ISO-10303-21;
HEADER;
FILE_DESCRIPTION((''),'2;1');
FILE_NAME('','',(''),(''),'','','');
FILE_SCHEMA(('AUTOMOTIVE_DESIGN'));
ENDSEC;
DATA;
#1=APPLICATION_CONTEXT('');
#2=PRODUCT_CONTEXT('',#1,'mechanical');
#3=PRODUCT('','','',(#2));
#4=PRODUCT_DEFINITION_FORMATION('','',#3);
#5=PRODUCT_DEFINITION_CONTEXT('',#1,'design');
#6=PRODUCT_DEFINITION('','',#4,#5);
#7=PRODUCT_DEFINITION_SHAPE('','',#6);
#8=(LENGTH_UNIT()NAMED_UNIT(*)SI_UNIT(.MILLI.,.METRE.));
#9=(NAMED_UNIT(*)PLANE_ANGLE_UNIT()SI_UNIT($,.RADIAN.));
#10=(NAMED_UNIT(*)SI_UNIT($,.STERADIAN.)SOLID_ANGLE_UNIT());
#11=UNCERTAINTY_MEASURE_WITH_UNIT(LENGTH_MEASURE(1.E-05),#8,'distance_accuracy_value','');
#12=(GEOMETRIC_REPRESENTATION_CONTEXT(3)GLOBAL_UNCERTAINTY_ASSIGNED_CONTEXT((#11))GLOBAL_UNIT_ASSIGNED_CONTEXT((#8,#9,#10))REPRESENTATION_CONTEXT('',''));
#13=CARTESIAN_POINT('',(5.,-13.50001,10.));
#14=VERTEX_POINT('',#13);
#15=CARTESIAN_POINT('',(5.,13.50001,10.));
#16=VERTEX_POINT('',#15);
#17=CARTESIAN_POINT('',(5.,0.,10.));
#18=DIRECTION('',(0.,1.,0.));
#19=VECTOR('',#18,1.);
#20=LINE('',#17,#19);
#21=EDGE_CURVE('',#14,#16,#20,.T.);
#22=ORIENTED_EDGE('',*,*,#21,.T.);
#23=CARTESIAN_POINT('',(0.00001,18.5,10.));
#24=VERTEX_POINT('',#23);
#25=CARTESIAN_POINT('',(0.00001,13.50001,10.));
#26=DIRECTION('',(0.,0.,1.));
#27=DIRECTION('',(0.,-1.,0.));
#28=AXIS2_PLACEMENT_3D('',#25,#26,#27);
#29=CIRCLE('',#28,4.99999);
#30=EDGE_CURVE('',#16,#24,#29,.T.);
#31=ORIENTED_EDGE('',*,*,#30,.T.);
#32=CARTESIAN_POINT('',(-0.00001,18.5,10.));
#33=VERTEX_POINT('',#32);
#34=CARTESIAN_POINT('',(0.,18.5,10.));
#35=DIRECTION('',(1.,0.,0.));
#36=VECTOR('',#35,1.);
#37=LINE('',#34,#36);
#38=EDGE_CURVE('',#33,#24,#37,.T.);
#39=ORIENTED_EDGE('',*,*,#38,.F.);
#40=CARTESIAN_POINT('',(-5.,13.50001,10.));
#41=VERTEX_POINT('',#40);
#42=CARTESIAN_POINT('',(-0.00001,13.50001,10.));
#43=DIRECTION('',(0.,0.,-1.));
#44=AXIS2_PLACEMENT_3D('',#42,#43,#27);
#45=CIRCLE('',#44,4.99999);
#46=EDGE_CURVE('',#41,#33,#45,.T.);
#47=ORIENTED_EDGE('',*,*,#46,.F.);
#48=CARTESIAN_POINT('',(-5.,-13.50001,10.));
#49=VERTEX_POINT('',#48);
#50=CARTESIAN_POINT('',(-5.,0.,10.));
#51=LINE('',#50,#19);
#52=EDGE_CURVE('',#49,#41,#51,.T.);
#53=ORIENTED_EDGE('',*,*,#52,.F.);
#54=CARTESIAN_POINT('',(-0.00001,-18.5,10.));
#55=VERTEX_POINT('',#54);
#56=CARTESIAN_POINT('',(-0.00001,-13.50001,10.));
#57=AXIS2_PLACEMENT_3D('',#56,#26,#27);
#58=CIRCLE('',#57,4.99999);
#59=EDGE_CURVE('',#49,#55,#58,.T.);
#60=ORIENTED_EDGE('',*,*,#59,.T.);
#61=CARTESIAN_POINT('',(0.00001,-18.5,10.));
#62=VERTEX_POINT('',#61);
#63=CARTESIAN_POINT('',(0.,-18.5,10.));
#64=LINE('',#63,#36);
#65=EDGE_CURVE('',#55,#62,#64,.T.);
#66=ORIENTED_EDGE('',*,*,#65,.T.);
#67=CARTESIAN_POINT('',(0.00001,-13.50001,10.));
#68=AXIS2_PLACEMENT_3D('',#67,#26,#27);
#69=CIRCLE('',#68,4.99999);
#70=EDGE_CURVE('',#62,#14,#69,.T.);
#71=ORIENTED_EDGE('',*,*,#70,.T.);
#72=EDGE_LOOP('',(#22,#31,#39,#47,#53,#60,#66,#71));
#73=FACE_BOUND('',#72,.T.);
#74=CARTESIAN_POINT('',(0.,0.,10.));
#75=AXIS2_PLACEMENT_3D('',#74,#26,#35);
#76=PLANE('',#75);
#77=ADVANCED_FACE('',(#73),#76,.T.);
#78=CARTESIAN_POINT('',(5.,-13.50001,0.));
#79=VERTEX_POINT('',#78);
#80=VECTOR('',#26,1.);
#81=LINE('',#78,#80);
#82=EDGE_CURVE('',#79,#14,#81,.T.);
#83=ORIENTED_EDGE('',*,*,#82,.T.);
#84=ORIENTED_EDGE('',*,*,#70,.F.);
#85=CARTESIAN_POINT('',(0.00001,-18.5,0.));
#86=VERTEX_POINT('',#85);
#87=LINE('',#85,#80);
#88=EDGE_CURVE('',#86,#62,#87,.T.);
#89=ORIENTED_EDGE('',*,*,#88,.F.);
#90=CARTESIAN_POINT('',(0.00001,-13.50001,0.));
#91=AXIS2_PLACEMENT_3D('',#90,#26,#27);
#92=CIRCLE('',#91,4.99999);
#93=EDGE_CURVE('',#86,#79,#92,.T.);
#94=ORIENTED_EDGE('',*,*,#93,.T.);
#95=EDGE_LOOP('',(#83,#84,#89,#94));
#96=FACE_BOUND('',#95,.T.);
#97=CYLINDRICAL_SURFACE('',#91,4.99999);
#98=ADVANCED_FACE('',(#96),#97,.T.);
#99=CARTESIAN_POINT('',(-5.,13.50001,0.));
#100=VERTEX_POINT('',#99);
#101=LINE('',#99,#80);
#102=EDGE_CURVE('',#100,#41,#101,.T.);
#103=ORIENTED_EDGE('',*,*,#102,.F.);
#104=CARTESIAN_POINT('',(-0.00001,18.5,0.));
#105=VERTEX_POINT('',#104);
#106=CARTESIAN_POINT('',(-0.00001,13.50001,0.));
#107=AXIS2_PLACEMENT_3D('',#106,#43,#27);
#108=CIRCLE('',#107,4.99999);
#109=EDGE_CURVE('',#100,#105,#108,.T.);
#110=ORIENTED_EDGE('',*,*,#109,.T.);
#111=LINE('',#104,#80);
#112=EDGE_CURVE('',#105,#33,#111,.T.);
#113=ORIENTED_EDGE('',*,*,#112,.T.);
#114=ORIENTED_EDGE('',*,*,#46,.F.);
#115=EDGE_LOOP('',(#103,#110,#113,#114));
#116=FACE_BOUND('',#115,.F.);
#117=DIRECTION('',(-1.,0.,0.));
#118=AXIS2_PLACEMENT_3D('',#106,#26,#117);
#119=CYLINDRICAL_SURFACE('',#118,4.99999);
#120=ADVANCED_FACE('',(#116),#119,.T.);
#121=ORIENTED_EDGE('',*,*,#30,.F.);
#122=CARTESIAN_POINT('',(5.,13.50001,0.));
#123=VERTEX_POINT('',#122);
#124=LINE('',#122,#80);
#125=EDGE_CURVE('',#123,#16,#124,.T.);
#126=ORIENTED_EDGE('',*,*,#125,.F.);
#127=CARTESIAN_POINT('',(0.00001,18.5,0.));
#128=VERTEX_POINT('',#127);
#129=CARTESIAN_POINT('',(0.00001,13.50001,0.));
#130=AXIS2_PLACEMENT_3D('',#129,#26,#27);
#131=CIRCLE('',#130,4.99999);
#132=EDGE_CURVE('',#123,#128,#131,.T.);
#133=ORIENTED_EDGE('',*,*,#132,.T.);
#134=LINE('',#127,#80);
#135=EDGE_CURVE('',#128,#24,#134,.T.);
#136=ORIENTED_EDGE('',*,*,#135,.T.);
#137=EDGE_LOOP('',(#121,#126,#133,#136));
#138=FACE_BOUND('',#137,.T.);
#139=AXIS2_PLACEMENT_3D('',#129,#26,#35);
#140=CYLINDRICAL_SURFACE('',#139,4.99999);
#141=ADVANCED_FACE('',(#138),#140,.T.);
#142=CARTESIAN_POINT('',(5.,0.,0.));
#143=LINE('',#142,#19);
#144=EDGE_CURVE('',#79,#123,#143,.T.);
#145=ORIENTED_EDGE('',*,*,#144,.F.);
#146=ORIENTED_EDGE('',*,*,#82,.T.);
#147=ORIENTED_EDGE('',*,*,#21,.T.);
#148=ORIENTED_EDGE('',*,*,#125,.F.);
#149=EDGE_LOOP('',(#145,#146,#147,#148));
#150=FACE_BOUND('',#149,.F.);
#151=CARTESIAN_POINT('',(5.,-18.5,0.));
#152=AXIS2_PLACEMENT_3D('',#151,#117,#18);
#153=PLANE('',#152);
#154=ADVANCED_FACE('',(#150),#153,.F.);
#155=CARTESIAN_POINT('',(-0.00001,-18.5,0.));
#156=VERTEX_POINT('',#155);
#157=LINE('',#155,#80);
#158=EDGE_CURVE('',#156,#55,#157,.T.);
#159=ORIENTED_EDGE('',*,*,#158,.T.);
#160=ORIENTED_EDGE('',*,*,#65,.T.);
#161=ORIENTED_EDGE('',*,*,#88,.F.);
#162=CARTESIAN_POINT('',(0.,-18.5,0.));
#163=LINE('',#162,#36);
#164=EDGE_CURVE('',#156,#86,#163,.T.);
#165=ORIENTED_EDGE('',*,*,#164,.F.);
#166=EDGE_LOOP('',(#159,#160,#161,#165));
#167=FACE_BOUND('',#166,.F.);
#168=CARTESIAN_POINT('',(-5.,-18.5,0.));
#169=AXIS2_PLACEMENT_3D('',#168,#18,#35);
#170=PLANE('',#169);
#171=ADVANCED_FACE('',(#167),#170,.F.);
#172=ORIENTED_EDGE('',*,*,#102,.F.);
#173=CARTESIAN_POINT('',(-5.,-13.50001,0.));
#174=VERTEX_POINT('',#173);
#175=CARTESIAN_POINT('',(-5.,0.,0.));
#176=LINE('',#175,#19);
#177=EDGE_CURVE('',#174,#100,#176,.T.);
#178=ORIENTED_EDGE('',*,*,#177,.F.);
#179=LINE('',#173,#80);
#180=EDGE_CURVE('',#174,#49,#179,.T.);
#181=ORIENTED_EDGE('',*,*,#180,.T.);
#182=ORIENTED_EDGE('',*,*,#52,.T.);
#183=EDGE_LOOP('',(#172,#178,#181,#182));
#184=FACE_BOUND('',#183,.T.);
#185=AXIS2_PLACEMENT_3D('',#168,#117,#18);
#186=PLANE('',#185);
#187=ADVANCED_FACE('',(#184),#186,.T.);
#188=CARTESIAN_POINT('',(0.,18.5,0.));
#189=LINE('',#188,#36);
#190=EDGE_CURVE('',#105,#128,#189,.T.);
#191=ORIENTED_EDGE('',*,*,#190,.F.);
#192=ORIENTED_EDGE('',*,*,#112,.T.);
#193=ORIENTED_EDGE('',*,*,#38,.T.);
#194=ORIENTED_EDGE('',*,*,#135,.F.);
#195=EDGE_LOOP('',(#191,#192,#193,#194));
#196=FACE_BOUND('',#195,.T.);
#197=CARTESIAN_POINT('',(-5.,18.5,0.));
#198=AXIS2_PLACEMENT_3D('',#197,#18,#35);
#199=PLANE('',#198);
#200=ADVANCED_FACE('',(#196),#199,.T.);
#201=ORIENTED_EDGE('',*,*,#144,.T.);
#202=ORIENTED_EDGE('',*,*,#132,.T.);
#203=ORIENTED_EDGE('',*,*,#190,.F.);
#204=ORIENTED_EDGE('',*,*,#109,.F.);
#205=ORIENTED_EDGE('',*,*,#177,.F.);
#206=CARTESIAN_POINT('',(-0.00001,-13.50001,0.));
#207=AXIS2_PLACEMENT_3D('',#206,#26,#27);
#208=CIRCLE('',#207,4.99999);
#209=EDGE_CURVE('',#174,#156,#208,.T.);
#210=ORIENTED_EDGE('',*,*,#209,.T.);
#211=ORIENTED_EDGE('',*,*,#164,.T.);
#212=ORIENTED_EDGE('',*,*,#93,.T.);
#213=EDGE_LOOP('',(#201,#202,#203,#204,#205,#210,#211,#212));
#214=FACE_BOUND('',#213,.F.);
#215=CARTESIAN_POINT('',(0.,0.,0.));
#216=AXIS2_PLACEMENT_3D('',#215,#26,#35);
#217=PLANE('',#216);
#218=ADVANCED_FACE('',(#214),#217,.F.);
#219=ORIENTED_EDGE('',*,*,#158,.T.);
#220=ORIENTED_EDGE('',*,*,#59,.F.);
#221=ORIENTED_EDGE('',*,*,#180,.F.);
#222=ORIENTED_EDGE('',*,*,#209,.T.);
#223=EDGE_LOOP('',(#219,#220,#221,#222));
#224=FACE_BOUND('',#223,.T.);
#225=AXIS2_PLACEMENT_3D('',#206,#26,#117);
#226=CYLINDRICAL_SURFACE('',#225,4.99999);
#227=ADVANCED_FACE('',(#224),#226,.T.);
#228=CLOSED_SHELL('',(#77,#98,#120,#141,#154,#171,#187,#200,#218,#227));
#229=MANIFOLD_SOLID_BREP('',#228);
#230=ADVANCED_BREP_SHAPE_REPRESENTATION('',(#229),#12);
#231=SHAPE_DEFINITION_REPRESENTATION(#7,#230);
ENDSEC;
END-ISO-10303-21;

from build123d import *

# Parameters (mm, degrees)
F0_W     = 10
F0_H     = 37
F1_DEPTH = 10
F2_R     = 4.99999


# Not quite as in the source:
# - a fillet or chamfer is up to 0.001 mm smaller than in the source, because OpenCascade refuses the exact size


with BuildPart() as f1:
    # F0 (on Top) → F1 (new body)
    with BuildSketch(Plane.XY):
        Rectangle(F0_W, F0_H)
    extrude(amount=F1_DEPTH)

    # F2 (radius 5 in the source; OpenCascade refuses exactly that, so slightly less here)
    f2_edges = [f1.edges().sort_by_distance(p)[0] for p in [
        (-5, 18.5, 5),
        (5, 18.5, 5),
        (-5, -18.5, 5),
        (5, -18.5, 5),
    ]]
    fillet(f2_edges, radius=F2_R)


solid = f1.part
